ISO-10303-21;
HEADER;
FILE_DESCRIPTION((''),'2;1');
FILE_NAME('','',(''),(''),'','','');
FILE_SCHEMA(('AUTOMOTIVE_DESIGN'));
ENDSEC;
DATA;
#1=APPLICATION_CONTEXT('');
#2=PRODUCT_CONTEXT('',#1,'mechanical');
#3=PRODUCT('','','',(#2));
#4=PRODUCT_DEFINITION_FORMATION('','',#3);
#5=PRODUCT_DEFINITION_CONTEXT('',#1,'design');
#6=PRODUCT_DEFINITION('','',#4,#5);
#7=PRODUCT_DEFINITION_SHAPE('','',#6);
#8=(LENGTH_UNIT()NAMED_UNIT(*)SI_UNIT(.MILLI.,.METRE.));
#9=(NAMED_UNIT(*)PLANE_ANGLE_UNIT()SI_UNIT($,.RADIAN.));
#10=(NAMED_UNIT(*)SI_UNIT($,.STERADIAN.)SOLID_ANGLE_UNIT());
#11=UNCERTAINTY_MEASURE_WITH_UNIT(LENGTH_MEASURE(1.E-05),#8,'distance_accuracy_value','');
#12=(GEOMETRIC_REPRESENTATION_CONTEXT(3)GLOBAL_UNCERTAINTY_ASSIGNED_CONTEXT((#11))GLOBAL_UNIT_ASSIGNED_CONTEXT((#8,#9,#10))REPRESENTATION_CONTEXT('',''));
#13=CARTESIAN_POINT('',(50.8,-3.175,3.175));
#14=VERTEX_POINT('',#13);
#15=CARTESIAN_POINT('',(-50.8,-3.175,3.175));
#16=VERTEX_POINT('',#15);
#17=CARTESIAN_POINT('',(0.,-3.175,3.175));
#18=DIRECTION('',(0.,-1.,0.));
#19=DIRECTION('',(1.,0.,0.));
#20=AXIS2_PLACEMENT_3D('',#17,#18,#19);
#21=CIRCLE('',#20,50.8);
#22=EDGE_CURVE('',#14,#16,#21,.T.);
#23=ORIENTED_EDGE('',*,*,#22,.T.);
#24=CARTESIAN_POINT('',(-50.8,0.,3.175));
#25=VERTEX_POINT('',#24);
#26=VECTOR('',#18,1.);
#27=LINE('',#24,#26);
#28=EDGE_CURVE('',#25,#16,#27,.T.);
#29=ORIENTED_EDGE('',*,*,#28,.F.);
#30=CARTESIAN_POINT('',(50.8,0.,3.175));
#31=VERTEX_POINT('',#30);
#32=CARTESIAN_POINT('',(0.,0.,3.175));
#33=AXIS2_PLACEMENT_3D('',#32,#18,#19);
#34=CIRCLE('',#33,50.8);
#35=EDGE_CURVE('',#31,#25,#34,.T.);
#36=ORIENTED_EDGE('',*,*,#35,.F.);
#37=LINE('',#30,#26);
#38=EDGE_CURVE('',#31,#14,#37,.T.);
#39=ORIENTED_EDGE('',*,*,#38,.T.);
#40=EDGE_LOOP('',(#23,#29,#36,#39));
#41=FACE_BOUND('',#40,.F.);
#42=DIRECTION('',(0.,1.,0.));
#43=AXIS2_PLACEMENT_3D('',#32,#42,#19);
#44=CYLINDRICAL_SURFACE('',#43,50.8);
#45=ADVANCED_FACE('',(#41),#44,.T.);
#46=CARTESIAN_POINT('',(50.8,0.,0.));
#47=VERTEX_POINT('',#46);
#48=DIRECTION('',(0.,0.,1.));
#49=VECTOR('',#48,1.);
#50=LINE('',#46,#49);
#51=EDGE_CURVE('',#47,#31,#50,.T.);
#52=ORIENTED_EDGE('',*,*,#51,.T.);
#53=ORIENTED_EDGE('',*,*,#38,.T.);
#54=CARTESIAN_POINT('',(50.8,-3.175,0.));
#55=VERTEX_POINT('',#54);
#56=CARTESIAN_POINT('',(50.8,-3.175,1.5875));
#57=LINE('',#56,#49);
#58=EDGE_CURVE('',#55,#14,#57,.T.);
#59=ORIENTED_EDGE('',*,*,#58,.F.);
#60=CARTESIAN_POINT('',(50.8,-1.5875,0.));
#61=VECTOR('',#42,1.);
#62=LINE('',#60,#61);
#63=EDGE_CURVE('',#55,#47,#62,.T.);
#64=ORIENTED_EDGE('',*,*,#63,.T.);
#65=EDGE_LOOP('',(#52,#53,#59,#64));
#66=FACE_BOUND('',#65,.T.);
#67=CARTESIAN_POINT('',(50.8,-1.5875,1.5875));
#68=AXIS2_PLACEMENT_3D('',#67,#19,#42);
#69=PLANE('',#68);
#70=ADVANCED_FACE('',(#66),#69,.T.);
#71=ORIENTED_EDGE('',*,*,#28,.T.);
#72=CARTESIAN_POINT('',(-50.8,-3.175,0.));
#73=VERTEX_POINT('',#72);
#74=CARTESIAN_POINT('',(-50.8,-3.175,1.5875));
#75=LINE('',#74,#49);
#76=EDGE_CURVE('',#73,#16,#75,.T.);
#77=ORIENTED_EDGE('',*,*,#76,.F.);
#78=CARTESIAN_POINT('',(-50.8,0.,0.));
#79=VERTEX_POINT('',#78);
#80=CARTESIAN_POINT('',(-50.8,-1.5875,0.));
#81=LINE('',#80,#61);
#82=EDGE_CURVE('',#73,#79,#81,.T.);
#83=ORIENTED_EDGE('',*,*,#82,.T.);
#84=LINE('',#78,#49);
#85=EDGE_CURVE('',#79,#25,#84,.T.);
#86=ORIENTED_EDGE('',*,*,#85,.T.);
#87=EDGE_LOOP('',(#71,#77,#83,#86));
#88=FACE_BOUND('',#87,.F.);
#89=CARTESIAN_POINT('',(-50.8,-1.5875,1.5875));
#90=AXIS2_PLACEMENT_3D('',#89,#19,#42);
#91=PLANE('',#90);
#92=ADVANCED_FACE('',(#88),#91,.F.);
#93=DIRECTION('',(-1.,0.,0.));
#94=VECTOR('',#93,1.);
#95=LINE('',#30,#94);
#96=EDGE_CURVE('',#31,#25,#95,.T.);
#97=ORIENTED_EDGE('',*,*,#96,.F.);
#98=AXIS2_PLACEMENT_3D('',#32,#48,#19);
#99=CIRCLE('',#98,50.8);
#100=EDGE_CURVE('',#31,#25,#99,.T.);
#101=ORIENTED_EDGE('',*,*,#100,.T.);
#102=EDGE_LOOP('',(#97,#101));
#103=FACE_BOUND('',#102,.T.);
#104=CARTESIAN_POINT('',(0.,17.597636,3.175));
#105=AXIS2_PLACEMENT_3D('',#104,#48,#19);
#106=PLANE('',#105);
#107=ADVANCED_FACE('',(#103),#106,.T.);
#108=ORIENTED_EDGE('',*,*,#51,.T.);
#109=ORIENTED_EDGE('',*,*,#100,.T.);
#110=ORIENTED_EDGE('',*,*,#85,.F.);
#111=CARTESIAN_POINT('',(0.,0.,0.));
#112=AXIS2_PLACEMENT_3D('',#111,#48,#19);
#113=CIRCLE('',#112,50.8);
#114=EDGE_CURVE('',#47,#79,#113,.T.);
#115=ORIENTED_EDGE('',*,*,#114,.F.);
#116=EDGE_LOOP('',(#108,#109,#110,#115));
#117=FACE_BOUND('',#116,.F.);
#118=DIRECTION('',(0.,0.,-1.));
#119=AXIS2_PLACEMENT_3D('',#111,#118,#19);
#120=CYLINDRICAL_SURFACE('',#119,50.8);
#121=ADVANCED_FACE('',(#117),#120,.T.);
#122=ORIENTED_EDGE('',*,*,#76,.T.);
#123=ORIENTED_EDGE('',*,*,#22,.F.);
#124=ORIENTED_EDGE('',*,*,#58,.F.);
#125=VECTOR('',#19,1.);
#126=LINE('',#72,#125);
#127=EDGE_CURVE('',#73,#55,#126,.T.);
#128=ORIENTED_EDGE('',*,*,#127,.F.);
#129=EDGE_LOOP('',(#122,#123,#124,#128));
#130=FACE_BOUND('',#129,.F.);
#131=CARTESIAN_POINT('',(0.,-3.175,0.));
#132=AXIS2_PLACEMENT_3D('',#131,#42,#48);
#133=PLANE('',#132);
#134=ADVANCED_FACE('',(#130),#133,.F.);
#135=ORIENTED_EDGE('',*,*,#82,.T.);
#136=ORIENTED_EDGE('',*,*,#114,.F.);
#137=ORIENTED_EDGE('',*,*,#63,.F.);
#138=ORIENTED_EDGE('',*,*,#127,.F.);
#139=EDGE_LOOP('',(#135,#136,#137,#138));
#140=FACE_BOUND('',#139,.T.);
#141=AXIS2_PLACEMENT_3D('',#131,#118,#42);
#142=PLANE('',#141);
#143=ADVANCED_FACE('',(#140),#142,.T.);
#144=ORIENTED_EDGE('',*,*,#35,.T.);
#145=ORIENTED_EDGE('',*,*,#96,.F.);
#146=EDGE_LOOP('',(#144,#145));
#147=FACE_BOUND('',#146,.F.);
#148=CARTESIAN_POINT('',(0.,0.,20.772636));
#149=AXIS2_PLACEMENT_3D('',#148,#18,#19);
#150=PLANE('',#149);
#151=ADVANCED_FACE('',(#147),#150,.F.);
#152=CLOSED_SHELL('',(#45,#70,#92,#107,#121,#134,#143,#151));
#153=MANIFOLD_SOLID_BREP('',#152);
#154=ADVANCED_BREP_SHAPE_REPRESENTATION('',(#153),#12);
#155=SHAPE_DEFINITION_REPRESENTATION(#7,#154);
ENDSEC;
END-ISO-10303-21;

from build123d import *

# Parameters (mm, degrees)
F1_DEPTH      = 3.175
F3_DEPTH      = 3.175
F4_W          = 3.175
F4_H          = 3.175
F5_DEPTH      = 50.8
F5_DEPTH_BACK = 50.8


# Not quite as in the source:
# - an extrude ends at something that could not be found from the text; its depth is read off the source's solid


with BuildPart() as f1:
    # F0 (on Top) → F1 (new body)
    with BuildSketch(Plane.XY):
        with BuildLine():
            Line((-50.8, 0), (50.8, 0))
            ThreePointArc((50.8, 0), (0, 50.8), (-50.8, 0))
        make_face()
    extrude(amount=F1_DEPTH)

    # F2 (on face) → F3 (join)
    with BuildSketch(Plane.XZ):
        with BuildLine():
            ThreePointArc((50.8, 3.175), (0, 53.975), (-50.8, 3.175))
            Line((-50.8, 3.175), (50.8, 3.175))
        make_face()
    extrude(amount=F3_DEPTH)

    # F4 (on Right) → F5 (join, two sides)
    with BuildSketch(Plane.YZ) as f5_sk:
        with Locations((-1.5875, 1.5875)):
            Rectangle(F4_W, F4_H)
    extrude(amount=F5_DEPTH)
    extrude(f5_sk.sketch, amount=-F5_DEPTH_BACK)


solid = f1.part
